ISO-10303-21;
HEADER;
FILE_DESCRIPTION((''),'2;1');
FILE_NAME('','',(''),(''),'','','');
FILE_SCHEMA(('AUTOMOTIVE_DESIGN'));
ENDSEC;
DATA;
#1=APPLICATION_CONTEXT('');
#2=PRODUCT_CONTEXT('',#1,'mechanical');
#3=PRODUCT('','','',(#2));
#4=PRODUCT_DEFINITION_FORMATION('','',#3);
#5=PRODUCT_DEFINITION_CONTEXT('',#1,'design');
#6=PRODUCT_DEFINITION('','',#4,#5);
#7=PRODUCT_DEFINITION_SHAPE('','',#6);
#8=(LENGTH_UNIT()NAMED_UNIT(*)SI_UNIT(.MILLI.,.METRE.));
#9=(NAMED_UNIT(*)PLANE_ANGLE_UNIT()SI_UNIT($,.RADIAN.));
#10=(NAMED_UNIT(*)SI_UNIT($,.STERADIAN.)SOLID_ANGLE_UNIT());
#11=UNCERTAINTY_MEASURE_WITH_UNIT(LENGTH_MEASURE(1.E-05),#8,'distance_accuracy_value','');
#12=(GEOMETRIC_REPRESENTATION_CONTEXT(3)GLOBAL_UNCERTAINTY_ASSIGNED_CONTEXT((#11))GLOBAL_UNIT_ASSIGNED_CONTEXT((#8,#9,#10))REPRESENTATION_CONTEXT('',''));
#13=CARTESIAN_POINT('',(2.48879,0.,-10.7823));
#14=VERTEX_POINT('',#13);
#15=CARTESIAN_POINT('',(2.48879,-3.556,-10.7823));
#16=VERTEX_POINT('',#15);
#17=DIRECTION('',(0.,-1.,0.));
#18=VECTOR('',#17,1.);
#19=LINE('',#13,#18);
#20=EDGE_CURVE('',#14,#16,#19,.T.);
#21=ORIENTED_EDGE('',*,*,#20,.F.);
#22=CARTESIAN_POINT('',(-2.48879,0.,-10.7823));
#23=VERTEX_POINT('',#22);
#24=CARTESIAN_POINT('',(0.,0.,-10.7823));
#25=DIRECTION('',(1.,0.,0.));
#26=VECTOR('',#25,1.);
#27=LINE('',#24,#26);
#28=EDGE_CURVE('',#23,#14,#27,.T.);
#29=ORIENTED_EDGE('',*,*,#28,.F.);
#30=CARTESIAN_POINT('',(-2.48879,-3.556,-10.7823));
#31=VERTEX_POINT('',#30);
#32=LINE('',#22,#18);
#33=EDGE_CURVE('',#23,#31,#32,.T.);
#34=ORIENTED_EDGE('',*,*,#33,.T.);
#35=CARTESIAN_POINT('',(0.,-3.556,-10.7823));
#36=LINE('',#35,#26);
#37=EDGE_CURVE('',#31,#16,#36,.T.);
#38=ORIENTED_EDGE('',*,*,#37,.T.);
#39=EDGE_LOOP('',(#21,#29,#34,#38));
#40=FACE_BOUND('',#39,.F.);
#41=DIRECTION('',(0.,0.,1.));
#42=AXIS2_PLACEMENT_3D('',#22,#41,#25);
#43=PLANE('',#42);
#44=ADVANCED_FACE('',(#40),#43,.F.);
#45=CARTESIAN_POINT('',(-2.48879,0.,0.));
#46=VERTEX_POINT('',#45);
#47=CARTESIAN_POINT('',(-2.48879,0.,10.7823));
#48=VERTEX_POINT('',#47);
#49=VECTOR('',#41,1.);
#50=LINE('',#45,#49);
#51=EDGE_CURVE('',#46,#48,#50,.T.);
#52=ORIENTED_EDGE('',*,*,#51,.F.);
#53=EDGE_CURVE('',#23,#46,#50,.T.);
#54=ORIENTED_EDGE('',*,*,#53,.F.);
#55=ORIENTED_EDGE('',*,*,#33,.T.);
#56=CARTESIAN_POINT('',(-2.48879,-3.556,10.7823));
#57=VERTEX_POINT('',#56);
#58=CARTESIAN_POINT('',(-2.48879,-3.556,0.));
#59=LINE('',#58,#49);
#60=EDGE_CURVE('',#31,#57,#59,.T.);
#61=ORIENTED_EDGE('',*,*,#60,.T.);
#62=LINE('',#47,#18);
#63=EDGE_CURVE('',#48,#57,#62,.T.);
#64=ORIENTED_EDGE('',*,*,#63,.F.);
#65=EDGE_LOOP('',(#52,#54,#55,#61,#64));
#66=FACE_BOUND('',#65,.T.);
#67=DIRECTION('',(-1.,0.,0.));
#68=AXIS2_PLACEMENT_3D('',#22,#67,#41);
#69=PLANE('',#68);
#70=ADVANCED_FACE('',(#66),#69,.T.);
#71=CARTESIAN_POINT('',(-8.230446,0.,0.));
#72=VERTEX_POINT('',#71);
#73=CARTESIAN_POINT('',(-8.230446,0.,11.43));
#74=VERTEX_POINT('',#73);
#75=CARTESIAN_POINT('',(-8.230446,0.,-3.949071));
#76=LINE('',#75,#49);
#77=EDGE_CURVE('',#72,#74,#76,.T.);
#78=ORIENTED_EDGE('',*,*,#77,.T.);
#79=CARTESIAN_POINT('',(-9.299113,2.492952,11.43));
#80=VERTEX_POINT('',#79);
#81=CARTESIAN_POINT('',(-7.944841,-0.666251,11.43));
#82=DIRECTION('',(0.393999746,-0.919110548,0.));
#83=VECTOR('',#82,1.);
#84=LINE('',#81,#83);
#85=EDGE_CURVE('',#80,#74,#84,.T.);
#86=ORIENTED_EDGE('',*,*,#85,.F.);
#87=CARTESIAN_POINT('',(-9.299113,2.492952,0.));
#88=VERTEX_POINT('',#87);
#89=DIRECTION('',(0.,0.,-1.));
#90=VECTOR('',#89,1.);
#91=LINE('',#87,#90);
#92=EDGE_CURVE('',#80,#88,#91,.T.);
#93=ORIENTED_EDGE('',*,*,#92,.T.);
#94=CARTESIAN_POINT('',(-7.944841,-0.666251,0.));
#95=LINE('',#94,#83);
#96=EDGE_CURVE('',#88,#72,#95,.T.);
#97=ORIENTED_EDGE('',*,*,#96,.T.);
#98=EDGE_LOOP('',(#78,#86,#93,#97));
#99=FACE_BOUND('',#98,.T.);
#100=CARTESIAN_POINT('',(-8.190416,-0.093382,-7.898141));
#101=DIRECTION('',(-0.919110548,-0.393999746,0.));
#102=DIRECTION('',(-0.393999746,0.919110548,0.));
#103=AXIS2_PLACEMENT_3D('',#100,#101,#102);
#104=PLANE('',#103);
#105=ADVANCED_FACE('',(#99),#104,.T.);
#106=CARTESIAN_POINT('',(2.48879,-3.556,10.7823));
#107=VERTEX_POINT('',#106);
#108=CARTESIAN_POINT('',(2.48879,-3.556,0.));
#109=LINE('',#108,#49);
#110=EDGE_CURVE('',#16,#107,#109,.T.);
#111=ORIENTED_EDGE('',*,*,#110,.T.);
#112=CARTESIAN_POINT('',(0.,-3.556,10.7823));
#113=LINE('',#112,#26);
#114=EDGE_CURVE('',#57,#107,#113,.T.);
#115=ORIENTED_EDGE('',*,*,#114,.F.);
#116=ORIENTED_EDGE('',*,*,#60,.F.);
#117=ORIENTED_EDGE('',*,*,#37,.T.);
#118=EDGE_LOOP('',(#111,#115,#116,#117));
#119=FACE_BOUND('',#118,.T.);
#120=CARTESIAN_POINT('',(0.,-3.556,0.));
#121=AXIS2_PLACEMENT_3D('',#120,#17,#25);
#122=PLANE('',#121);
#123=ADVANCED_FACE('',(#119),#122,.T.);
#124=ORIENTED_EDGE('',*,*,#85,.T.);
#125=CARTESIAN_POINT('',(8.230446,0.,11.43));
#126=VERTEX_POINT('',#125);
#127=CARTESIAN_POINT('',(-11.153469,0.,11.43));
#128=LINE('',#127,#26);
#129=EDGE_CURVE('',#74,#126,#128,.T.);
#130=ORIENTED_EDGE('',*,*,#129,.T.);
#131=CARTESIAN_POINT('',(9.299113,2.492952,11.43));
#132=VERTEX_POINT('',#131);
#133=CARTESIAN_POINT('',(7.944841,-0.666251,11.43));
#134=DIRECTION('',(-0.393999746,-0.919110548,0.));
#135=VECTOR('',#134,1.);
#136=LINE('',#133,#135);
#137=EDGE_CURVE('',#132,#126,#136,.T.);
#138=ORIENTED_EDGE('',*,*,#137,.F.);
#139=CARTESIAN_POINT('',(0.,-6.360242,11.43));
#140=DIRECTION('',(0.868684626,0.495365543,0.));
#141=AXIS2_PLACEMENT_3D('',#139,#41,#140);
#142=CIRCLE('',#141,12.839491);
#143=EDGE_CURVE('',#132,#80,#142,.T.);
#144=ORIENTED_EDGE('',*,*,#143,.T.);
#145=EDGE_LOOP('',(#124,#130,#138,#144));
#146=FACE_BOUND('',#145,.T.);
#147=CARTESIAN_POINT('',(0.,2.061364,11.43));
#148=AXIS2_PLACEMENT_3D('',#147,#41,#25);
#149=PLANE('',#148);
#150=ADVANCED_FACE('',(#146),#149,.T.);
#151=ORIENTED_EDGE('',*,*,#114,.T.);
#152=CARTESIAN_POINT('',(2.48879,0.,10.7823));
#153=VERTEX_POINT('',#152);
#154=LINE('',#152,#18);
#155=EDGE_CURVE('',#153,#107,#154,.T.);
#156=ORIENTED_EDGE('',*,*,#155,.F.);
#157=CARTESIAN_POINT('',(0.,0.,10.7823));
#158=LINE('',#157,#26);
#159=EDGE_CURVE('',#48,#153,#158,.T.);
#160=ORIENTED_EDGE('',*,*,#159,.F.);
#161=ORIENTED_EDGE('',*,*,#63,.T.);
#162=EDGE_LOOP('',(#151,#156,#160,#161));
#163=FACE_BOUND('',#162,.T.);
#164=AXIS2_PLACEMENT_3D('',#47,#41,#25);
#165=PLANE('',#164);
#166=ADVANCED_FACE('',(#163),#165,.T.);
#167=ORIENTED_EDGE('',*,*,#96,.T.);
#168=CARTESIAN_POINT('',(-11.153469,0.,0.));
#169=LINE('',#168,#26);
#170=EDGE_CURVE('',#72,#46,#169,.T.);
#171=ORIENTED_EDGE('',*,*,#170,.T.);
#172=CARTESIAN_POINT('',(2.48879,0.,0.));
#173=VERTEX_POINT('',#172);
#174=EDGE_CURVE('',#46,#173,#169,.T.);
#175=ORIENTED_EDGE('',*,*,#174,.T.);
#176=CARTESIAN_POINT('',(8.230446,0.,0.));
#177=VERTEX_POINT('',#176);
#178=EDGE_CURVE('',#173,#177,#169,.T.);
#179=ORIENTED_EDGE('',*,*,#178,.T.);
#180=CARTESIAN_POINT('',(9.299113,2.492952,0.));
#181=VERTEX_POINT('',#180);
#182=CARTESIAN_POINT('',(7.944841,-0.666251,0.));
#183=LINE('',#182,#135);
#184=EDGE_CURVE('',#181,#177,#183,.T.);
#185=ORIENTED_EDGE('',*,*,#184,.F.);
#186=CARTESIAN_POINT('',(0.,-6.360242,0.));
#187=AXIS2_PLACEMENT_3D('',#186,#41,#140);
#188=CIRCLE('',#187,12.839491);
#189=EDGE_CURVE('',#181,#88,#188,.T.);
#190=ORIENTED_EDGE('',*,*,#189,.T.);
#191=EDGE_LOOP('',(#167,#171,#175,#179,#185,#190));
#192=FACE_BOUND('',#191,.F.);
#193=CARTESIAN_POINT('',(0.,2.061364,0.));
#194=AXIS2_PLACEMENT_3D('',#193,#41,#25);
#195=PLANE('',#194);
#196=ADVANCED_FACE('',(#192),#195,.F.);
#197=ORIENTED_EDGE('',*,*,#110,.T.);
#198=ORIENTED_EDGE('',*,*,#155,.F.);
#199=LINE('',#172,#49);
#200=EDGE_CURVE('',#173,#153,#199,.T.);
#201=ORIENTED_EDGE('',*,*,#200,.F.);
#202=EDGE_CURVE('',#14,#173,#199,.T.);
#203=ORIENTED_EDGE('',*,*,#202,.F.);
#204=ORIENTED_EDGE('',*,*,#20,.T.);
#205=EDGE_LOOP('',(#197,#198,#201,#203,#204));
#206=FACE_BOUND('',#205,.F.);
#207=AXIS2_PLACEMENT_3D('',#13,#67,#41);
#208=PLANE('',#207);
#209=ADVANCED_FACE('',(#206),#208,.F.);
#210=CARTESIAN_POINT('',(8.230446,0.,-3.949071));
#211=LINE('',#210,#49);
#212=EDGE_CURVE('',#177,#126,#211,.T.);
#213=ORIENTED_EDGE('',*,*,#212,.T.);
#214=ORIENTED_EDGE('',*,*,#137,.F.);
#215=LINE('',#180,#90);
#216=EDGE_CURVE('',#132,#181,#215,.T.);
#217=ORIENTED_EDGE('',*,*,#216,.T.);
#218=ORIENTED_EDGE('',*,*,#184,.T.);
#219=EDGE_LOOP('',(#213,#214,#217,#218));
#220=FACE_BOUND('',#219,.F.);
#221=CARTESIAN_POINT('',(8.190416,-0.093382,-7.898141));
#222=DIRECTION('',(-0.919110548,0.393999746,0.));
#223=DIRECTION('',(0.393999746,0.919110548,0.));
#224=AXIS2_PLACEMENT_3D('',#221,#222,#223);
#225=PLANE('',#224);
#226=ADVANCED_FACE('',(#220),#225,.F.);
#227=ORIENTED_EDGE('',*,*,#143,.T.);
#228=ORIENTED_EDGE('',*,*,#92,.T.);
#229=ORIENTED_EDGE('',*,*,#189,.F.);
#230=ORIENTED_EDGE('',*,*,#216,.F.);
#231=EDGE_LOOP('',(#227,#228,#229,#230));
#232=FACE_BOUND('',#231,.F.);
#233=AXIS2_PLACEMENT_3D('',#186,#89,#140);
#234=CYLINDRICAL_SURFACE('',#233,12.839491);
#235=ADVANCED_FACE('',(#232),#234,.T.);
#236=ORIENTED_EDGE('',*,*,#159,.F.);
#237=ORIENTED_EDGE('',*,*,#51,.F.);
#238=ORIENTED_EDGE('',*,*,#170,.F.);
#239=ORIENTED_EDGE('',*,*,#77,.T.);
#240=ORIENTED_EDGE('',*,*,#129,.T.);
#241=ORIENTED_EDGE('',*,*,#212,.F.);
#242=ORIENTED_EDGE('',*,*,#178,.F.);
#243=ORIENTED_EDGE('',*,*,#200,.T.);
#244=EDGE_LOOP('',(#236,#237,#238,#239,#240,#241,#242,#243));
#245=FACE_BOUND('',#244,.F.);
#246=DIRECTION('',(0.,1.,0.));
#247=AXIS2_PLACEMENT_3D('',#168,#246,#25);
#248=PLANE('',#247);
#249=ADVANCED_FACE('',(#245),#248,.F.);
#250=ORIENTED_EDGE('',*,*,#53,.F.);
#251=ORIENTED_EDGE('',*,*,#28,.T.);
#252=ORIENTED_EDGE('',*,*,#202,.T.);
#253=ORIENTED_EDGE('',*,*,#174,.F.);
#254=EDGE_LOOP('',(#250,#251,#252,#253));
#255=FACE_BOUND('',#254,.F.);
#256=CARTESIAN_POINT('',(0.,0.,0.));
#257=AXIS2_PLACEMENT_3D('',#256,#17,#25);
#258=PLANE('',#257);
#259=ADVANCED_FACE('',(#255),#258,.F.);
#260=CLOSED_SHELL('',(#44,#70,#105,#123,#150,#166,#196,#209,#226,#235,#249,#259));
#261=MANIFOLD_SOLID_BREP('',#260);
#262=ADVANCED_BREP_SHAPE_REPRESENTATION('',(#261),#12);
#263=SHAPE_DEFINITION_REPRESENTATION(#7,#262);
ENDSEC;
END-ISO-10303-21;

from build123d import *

# Parameters (mm, degrees)
F2_DEPTH    = 11.43
F0_W        = 4.9775806256
F0_H        = 21.5646
F3_DEPTH    = 3.556
F4_T1_DEPTH = 27.2262824301


# Not quite as in the source:
# - a fillet or chamfer that OpenCascade refuses, or shapes differently, is made with other operations: its cross-section is extruded or revolved along the edge and cut away or added


with BuildPart() as f2:
    # F1 (on Top) → F2 (new body)
    with BuildSketch(Plane.XY):
        with BuildLine():
            ThreePointArc((11.1534688622, 0), (0, 6.4792498177), (-11.1534688622, 0))
            Line((-11.1534688622, 0), (11.1534688622, 0))
        make_face()
    extrude(amount=F2_DEPTH)

    # F0 (on Front) → F3 (join)
    with BuildSketch(Plane.XZ):
        Rectangle(F0_W, F0_H)
    extrude(amount=F3_DEPTH)

    # F4: chamfer of 2.54 on 2 edges, made by hand

    # F4_s2 → F4_t1 (cut)
    with BuildSketch(Plane.XY.offset(-7.898141215)):
        with BuildLine():
            Line((-8.190415898, -0.0933816317), (-9.3391430842, 2.5863339915))
            Line((-9.3391430842, 2.5863339915), (-9.3759354233, 2.6213620343))
            ThreePointArc((-9.3759354233, 2.6213620343), (-10.327366328, 1.3537144774), (-11.1975980412, 0.0251645696))
            Line((-11.1975980412, 0.0251645696), (-11.1534688622, -0.0508))
            ThreePointArc((-11.1534688622, -0.0508), (-9.6719423801, -0.0508), (-8.190415898, -0.1441816317))
            Line((-8.190415898, -0.1441816317), (-8.190415898, -0.0933816317))
        make_face()
        with BuildLine():
            Line((8.190415898, -0.0933816317), (9.3391430842, 2.5863339915))
            Line((9.3391430842, 2.5863339915), (9.3759354233, 2.6213620343))
            ThreePointArc((9.3759354233, 2.6213620343), (10.327366328, 1.3537144774), (11.1975980412, 0.0251645696))
            Line((11.1975980412, 0.0251645696), (11.1534688622, -0.0508))
            ThreePointArc((11.1534688622, -0.0508), (9.6719423801, -0.0508), (8.190415898, -0.1441816317))
            Line((8.190415898, -0.1441816317), (8.190415898, -0.0933816317))
        make_face()
    extrude(amount=F4_T1_DEPTH, mode=Mode.SUBTRACT)


solid = f2.part
